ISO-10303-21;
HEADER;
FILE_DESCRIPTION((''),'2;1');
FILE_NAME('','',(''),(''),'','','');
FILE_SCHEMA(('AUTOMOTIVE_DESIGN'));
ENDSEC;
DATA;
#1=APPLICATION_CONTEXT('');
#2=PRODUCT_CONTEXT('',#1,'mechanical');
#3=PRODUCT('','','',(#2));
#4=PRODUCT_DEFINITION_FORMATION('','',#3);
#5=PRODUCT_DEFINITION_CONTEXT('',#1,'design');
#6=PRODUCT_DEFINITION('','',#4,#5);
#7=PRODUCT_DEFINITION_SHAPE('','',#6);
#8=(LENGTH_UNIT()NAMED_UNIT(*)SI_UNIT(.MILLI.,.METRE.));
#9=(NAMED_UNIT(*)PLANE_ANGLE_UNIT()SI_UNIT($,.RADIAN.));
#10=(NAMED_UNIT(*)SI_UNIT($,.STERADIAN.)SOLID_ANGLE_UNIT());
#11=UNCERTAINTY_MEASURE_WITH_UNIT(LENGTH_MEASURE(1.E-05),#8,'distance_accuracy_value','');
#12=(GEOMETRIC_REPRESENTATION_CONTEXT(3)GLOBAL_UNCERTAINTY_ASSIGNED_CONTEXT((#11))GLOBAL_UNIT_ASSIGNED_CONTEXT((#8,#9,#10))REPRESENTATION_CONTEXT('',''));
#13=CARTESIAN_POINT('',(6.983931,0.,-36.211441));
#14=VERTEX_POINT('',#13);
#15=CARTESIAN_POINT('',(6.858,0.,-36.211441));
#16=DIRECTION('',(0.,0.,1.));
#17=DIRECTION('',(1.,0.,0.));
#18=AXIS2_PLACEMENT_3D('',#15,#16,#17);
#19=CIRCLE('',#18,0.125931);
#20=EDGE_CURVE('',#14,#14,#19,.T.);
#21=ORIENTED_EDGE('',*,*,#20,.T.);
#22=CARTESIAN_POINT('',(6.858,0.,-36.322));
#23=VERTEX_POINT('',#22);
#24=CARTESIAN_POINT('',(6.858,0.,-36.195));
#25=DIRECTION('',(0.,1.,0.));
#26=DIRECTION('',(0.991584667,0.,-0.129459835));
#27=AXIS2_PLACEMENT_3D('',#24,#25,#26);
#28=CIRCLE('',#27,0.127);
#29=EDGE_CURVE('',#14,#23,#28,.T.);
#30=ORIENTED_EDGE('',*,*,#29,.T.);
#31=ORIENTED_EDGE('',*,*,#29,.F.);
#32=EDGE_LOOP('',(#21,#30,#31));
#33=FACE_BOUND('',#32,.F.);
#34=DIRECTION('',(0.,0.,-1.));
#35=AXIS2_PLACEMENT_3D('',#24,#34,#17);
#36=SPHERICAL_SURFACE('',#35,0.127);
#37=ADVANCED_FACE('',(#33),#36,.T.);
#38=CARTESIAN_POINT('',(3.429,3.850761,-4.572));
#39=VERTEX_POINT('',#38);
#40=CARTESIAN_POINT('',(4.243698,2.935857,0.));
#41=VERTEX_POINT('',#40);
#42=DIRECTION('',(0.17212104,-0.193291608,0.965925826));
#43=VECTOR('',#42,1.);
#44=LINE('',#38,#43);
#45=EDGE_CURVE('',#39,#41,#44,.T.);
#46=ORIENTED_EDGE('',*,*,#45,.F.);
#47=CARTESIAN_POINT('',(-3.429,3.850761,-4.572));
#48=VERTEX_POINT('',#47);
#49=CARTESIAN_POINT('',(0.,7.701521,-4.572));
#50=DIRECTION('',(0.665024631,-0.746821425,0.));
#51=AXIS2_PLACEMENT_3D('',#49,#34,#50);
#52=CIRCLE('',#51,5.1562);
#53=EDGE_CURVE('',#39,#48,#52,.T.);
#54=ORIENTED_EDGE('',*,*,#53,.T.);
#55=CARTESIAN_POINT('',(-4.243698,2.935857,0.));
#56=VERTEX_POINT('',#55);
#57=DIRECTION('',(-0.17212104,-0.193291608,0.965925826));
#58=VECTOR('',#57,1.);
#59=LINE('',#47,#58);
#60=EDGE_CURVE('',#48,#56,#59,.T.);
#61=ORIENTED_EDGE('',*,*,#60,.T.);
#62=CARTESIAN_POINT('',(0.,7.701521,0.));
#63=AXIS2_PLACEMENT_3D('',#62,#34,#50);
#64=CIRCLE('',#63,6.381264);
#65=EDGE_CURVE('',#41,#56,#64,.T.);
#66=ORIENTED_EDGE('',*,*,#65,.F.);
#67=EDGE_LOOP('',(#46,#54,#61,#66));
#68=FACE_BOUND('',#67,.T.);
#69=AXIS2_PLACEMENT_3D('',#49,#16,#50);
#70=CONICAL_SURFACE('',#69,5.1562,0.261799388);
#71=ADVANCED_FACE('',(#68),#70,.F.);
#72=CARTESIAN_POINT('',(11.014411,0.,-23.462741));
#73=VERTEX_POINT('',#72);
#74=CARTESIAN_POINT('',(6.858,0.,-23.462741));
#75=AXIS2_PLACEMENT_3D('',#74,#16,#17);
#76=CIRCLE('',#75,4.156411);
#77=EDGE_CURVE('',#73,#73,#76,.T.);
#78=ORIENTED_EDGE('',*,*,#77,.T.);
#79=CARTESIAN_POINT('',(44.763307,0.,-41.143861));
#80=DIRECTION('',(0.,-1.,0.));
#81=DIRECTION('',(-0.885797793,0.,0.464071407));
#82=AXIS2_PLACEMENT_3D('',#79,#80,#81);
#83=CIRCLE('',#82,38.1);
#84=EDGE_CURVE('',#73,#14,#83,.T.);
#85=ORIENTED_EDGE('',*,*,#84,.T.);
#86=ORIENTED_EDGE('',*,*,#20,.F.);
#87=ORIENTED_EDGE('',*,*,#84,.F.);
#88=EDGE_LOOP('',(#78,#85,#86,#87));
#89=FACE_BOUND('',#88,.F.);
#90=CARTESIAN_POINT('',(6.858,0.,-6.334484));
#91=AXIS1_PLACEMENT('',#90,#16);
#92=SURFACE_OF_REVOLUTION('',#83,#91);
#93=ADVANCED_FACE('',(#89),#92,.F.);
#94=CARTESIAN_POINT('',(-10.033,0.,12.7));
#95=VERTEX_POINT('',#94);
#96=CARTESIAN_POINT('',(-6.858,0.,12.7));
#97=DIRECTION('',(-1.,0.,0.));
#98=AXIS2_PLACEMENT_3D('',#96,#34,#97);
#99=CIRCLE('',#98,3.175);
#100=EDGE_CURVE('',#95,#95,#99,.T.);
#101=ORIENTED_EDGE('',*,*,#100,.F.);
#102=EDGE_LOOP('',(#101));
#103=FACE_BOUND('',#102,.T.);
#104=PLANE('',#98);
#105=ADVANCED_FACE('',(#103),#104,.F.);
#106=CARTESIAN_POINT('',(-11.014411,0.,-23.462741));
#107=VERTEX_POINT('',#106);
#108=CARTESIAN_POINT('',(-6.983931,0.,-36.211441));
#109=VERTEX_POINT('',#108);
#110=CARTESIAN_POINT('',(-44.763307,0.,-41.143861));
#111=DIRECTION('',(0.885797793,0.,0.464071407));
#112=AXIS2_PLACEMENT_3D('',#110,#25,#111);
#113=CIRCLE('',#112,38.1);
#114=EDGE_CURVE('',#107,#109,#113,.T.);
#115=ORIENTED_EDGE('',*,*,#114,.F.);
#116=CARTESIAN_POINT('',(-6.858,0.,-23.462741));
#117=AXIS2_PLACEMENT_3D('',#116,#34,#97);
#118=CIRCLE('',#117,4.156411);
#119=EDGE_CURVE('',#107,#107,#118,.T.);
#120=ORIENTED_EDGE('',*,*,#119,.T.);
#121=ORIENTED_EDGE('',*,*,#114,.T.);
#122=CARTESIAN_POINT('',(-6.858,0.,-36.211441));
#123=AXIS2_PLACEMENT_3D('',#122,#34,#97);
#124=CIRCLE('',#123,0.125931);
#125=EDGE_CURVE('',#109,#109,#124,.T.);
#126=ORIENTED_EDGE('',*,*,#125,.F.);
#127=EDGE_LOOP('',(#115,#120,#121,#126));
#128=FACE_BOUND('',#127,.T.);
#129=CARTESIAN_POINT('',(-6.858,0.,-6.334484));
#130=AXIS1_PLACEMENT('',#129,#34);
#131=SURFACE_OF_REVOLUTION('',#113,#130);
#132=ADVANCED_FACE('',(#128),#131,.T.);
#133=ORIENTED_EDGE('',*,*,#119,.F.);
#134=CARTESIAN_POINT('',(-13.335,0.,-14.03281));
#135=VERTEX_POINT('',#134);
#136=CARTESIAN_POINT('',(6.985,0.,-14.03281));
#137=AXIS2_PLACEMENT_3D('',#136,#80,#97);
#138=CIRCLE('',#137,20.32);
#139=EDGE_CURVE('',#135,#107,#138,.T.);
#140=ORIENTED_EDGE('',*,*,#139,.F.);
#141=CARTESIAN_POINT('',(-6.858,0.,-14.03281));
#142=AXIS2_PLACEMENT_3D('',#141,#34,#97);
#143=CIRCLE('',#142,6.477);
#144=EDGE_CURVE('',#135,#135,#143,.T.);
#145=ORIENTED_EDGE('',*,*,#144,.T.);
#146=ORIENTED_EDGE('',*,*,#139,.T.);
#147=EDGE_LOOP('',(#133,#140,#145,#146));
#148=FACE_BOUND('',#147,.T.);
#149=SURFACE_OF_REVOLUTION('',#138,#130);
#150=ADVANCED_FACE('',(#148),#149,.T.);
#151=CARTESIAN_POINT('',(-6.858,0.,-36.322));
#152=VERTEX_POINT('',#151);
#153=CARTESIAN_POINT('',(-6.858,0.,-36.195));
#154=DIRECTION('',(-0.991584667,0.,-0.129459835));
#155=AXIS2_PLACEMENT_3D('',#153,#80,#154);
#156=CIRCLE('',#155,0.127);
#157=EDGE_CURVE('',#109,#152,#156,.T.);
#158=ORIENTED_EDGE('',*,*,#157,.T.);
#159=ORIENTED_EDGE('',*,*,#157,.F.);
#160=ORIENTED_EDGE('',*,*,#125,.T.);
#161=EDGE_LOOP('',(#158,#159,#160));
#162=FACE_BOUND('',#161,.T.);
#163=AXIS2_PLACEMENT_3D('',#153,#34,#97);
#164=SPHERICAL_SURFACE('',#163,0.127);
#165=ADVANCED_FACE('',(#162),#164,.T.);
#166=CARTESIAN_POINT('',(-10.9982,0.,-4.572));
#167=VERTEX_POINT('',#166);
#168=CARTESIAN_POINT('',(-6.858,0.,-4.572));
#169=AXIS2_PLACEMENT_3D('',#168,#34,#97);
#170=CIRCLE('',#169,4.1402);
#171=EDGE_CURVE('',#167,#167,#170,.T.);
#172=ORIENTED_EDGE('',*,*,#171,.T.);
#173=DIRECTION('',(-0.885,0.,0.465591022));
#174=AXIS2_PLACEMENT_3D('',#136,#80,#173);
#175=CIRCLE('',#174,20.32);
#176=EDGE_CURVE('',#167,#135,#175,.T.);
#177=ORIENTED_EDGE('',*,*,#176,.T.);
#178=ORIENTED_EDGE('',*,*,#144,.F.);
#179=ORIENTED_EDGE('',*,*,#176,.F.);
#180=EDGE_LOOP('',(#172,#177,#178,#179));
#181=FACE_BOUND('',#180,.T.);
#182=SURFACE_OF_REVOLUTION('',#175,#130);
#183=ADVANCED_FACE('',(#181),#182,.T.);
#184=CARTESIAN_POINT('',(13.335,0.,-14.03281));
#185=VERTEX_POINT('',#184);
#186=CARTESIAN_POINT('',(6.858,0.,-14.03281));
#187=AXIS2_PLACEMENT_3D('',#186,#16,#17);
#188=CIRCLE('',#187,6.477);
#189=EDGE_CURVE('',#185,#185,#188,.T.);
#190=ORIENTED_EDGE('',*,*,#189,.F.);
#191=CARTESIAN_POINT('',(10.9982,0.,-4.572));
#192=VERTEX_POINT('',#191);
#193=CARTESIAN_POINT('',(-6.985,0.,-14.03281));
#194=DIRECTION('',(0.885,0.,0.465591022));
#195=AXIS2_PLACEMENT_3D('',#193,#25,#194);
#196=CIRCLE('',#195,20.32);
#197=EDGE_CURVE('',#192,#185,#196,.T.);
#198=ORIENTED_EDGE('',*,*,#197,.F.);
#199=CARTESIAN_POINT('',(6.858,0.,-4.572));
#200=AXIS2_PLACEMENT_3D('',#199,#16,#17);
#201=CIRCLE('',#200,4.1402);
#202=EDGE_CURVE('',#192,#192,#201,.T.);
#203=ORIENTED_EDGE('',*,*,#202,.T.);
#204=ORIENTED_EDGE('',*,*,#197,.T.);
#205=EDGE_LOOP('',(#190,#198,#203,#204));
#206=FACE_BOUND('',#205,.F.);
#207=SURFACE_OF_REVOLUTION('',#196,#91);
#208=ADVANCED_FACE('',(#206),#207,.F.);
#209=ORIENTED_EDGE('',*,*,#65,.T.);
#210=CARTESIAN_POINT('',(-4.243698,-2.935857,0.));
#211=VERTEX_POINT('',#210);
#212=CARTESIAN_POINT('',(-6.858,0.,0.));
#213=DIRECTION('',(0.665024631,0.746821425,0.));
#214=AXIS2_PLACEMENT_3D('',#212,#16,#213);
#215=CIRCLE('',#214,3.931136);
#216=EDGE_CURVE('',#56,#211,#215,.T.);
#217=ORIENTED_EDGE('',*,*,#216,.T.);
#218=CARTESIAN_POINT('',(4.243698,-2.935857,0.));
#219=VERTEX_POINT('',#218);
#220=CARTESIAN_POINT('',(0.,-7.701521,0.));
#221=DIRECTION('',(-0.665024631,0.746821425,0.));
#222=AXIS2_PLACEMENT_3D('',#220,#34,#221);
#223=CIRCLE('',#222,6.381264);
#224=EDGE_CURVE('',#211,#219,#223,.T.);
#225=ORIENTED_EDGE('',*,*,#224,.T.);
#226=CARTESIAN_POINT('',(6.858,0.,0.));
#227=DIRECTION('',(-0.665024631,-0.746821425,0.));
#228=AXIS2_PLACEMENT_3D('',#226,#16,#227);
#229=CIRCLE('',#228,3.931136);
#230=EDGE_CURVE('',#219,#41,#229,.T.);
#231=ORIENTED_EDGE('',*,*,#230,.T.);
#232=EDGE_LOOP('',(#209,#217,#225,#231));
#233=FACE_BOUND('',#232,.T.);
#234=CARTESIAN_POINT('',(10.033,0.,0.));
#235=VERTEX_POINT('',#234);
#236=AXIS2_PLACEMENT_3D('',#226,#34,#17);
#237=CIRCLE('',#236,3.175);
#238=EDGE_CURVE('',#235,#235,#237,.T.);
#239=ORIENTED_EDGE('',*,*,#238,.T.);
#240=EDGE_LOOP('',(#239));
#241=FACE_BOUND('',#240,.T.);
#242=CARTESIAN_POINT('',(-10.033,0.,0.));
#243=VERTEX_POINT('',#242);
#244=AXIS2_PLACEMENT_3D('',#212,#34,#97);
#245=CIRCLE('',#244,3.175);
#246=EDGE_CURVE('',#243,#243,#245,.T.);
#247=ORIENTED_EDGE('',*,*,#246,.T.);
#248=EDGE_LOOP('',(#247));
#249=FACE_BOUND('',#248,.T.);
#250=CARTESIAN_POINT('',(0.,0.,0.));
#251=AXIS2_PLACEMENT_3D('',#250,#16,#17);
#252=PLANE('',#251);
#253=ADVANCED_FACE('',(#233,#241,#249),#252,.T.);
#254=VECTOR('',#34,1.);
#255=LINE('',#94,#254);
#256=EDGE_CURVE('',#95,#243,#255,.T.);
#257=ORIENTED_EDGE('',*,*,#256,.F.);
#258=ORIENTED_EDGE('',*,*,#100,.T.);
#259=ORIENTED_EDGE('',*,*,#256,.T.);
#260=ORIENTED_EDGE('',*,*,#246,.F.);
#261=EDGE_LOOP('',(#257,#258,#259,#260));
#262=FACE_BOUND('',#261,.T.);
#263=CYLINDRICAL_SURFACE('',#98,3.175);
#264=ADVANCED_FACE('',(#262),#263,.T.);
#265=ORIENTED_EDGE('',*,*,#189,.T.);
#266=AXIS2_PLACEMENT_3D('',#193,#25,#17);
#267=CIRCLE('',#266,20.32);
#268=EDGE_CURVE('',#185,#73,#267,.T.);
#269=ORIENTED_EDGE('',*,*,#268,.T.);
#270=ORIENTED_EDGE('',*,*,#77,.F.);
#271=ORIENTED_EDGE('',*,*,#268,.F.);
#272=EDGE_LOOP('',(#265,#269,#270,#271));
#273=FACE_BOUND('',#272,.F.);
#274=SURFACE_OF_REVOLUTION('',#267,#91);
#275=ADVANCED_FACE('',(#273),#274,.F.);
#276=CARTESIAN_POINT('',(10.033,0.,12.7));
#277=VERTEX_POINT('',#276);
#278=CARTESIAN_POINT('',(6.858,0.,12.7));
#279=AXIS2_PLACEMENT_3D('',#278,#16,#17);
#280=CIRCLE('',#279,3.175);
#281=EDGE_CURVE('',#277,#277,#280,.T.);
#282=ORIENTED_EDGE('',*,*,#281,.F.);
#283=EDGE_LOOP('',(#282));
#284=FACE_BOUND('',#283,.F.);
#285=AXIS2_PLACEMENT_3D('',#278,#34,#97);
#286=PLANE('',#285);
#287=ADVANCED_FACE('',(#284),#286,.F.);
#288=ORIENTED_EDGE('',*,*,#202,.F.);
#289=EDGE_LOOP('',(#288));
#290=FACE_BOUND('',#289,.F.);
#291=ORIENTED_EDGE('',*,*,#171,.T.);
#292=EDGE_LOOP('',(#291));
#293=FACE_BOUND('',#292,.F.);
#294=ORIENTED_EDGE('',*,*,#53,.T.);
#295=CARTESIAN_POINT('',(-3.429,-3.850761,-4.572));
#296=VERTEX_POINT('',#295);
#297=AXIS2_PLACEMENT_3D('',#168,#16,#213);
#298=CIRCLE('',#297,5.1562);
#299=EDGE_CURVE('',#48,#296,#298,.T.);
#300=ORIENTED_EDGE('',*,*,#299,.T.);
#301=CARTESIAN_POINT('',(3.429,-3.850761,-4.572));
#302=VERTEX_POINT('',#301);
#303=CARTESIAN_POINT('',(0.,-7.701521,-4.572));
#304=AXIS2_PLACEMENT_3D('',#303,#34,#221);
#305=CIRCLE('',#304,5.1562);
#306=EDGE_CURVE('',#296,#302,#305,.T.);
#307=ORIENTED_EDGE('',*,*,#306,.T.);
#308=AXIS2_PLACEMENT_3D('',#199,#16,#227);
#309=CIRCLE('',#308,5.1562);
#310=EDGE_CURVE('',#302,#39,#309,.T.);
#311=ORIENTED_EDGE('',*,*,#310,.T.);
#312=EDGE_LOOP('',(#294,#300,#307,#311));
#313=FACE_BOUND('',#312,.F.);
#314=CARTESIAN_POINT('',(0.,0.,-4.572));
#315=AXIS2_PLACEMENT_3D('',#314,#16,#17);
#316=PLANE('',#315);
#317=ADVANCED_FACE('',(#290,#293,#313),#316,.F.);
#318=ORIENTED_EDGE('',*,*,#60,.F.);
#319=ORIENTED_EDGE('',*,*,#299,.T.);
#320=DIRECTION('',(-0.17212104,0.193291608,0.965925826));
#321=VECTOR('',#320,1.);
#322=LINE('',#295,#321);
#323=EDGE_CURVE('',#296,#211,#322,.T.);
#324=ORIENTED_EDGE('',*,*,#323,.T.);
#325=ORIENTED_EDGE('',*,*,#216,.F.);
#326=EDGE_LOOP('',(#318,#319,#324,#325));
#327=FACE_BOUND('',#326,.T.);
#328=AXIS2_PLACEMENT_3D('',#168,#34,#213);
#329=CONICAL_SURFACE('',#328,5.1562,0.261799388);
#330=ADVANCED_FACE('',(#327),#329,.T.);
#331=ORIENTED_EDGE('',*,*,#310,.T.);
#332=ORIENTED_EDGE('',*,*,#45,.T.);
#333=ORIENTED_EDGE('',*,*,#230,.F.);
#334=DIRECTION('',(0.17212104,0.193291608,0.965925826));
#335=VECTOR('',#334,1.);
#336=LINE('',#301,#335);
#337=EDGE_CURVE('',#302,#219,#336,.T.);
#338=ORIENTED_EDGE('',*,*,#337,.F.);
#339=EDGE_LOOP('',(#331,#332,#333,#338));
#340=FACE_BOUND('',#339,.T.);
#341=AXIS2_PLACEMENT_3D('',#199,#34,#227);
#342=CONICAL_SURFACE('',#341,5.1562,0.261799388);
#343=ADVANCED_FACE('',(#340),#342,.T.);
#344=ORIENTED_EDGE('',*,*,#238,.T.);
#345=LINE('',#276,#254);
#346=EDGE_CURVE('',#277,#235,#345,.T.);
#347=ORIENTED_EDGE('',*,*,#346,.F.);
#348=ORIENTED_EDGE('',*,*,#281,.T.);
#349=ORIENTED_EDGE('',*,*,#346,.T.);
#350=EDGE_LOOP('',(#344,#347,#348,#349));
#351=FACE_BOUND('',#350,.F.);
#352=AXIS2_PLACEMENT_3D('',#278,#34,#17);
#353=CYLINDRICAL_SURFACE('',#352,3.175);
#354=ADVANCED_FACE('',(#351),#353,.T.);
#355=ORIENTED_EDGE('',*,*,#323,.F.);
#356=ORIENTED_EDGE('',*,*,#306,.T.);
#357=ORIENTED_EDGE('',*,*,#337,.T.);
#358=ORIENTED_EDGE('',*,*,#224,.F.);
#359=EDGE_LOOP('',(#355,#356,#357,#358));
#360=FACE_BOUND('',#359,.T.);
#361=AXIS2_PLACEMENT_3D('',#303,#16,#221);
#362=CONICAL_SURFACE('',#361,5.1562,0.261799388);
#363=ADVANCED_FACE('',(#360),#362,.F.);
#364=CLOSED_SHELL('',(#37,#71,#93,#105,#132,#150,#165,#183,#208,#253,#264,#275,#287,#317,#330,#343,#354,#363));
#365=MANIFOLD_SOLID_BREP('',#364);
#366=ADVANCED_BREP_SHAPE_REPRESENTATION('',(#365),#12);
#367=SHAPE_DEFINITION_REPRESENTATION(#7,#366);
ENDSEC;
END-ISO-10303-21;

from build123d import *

# Parameters (mm, degrees)
F4_DEPTH = 4.572
F4_TAPER = 15


with BuildPart() as f1:
    # F0 (on Front) → F1 (revolve)
    with BuildSketch(Plane.XZ):
        with BuildLine():
            Line((-6.858, 12.7), (-10.033, 12.7))
            Line((-10.033, 12.7), (-10.033, -4.572))
            Line((-10.033, -4.572), (-10.9982, -4.572))
            ThreePointArc((-10.9982, -4.572), (-12.7421516444, -9.1602447444), (-13.335, -14.0328095721))
            ThreePointArc((-13.335, -14.0328095721), (-12.7463257854, -18.8884436966), (-11.0144111466, -23.4627405568))
            ThreePointArc((-11.0144111466, -23.4627405568), (-8.4355524205, -29.6589038682), (-6.9839312526, -36.2114413992))
            ThreePointArc((-6.9839312526, -36.2114413992), (-6.9417882519, -36.290438613), (-6.858, -36.322))
            Line((-6.858, -36.322), (-6.858, 12.7))
        make_face()
    revolve(axis=Axis((-6.858, 0, -6.3344838709), (0, 0, -1)))


with BuildPart() as f2_1:
    # F2: instance of F1
    add(f1.part.mirror(Plane.YZ))


with BuildPart() as f1_1:
    add(f1.part)

    add(f2_1.part)  # F4 merges F2_1
    # F3 (on face) → F4 (join)
    with BuildSketch(Plane.XY.offset(-4.572)):
        with BuildLine():
            ThreePointArc((3.429, 3.8507606314), (0, 2.5453212627), (-3.429, 3.8507606314))
            ThreePointArc((-3.429, 3.8507606314), (-12.0142, 0), (-3.429, -3.8507606314))
            ThreePointArc((-3.429, -3.8507606314), (0, -2.5453212627), (3.429, -3.8507606314))
            ThreePointArc((3.429, -3.8507606314), (12.0142, 0), (3.429, 3.8507606314))
        make_face()
    extrude(amount=F4_DEPTH, taper=F4_TAPER)


solid = f1_1.part
